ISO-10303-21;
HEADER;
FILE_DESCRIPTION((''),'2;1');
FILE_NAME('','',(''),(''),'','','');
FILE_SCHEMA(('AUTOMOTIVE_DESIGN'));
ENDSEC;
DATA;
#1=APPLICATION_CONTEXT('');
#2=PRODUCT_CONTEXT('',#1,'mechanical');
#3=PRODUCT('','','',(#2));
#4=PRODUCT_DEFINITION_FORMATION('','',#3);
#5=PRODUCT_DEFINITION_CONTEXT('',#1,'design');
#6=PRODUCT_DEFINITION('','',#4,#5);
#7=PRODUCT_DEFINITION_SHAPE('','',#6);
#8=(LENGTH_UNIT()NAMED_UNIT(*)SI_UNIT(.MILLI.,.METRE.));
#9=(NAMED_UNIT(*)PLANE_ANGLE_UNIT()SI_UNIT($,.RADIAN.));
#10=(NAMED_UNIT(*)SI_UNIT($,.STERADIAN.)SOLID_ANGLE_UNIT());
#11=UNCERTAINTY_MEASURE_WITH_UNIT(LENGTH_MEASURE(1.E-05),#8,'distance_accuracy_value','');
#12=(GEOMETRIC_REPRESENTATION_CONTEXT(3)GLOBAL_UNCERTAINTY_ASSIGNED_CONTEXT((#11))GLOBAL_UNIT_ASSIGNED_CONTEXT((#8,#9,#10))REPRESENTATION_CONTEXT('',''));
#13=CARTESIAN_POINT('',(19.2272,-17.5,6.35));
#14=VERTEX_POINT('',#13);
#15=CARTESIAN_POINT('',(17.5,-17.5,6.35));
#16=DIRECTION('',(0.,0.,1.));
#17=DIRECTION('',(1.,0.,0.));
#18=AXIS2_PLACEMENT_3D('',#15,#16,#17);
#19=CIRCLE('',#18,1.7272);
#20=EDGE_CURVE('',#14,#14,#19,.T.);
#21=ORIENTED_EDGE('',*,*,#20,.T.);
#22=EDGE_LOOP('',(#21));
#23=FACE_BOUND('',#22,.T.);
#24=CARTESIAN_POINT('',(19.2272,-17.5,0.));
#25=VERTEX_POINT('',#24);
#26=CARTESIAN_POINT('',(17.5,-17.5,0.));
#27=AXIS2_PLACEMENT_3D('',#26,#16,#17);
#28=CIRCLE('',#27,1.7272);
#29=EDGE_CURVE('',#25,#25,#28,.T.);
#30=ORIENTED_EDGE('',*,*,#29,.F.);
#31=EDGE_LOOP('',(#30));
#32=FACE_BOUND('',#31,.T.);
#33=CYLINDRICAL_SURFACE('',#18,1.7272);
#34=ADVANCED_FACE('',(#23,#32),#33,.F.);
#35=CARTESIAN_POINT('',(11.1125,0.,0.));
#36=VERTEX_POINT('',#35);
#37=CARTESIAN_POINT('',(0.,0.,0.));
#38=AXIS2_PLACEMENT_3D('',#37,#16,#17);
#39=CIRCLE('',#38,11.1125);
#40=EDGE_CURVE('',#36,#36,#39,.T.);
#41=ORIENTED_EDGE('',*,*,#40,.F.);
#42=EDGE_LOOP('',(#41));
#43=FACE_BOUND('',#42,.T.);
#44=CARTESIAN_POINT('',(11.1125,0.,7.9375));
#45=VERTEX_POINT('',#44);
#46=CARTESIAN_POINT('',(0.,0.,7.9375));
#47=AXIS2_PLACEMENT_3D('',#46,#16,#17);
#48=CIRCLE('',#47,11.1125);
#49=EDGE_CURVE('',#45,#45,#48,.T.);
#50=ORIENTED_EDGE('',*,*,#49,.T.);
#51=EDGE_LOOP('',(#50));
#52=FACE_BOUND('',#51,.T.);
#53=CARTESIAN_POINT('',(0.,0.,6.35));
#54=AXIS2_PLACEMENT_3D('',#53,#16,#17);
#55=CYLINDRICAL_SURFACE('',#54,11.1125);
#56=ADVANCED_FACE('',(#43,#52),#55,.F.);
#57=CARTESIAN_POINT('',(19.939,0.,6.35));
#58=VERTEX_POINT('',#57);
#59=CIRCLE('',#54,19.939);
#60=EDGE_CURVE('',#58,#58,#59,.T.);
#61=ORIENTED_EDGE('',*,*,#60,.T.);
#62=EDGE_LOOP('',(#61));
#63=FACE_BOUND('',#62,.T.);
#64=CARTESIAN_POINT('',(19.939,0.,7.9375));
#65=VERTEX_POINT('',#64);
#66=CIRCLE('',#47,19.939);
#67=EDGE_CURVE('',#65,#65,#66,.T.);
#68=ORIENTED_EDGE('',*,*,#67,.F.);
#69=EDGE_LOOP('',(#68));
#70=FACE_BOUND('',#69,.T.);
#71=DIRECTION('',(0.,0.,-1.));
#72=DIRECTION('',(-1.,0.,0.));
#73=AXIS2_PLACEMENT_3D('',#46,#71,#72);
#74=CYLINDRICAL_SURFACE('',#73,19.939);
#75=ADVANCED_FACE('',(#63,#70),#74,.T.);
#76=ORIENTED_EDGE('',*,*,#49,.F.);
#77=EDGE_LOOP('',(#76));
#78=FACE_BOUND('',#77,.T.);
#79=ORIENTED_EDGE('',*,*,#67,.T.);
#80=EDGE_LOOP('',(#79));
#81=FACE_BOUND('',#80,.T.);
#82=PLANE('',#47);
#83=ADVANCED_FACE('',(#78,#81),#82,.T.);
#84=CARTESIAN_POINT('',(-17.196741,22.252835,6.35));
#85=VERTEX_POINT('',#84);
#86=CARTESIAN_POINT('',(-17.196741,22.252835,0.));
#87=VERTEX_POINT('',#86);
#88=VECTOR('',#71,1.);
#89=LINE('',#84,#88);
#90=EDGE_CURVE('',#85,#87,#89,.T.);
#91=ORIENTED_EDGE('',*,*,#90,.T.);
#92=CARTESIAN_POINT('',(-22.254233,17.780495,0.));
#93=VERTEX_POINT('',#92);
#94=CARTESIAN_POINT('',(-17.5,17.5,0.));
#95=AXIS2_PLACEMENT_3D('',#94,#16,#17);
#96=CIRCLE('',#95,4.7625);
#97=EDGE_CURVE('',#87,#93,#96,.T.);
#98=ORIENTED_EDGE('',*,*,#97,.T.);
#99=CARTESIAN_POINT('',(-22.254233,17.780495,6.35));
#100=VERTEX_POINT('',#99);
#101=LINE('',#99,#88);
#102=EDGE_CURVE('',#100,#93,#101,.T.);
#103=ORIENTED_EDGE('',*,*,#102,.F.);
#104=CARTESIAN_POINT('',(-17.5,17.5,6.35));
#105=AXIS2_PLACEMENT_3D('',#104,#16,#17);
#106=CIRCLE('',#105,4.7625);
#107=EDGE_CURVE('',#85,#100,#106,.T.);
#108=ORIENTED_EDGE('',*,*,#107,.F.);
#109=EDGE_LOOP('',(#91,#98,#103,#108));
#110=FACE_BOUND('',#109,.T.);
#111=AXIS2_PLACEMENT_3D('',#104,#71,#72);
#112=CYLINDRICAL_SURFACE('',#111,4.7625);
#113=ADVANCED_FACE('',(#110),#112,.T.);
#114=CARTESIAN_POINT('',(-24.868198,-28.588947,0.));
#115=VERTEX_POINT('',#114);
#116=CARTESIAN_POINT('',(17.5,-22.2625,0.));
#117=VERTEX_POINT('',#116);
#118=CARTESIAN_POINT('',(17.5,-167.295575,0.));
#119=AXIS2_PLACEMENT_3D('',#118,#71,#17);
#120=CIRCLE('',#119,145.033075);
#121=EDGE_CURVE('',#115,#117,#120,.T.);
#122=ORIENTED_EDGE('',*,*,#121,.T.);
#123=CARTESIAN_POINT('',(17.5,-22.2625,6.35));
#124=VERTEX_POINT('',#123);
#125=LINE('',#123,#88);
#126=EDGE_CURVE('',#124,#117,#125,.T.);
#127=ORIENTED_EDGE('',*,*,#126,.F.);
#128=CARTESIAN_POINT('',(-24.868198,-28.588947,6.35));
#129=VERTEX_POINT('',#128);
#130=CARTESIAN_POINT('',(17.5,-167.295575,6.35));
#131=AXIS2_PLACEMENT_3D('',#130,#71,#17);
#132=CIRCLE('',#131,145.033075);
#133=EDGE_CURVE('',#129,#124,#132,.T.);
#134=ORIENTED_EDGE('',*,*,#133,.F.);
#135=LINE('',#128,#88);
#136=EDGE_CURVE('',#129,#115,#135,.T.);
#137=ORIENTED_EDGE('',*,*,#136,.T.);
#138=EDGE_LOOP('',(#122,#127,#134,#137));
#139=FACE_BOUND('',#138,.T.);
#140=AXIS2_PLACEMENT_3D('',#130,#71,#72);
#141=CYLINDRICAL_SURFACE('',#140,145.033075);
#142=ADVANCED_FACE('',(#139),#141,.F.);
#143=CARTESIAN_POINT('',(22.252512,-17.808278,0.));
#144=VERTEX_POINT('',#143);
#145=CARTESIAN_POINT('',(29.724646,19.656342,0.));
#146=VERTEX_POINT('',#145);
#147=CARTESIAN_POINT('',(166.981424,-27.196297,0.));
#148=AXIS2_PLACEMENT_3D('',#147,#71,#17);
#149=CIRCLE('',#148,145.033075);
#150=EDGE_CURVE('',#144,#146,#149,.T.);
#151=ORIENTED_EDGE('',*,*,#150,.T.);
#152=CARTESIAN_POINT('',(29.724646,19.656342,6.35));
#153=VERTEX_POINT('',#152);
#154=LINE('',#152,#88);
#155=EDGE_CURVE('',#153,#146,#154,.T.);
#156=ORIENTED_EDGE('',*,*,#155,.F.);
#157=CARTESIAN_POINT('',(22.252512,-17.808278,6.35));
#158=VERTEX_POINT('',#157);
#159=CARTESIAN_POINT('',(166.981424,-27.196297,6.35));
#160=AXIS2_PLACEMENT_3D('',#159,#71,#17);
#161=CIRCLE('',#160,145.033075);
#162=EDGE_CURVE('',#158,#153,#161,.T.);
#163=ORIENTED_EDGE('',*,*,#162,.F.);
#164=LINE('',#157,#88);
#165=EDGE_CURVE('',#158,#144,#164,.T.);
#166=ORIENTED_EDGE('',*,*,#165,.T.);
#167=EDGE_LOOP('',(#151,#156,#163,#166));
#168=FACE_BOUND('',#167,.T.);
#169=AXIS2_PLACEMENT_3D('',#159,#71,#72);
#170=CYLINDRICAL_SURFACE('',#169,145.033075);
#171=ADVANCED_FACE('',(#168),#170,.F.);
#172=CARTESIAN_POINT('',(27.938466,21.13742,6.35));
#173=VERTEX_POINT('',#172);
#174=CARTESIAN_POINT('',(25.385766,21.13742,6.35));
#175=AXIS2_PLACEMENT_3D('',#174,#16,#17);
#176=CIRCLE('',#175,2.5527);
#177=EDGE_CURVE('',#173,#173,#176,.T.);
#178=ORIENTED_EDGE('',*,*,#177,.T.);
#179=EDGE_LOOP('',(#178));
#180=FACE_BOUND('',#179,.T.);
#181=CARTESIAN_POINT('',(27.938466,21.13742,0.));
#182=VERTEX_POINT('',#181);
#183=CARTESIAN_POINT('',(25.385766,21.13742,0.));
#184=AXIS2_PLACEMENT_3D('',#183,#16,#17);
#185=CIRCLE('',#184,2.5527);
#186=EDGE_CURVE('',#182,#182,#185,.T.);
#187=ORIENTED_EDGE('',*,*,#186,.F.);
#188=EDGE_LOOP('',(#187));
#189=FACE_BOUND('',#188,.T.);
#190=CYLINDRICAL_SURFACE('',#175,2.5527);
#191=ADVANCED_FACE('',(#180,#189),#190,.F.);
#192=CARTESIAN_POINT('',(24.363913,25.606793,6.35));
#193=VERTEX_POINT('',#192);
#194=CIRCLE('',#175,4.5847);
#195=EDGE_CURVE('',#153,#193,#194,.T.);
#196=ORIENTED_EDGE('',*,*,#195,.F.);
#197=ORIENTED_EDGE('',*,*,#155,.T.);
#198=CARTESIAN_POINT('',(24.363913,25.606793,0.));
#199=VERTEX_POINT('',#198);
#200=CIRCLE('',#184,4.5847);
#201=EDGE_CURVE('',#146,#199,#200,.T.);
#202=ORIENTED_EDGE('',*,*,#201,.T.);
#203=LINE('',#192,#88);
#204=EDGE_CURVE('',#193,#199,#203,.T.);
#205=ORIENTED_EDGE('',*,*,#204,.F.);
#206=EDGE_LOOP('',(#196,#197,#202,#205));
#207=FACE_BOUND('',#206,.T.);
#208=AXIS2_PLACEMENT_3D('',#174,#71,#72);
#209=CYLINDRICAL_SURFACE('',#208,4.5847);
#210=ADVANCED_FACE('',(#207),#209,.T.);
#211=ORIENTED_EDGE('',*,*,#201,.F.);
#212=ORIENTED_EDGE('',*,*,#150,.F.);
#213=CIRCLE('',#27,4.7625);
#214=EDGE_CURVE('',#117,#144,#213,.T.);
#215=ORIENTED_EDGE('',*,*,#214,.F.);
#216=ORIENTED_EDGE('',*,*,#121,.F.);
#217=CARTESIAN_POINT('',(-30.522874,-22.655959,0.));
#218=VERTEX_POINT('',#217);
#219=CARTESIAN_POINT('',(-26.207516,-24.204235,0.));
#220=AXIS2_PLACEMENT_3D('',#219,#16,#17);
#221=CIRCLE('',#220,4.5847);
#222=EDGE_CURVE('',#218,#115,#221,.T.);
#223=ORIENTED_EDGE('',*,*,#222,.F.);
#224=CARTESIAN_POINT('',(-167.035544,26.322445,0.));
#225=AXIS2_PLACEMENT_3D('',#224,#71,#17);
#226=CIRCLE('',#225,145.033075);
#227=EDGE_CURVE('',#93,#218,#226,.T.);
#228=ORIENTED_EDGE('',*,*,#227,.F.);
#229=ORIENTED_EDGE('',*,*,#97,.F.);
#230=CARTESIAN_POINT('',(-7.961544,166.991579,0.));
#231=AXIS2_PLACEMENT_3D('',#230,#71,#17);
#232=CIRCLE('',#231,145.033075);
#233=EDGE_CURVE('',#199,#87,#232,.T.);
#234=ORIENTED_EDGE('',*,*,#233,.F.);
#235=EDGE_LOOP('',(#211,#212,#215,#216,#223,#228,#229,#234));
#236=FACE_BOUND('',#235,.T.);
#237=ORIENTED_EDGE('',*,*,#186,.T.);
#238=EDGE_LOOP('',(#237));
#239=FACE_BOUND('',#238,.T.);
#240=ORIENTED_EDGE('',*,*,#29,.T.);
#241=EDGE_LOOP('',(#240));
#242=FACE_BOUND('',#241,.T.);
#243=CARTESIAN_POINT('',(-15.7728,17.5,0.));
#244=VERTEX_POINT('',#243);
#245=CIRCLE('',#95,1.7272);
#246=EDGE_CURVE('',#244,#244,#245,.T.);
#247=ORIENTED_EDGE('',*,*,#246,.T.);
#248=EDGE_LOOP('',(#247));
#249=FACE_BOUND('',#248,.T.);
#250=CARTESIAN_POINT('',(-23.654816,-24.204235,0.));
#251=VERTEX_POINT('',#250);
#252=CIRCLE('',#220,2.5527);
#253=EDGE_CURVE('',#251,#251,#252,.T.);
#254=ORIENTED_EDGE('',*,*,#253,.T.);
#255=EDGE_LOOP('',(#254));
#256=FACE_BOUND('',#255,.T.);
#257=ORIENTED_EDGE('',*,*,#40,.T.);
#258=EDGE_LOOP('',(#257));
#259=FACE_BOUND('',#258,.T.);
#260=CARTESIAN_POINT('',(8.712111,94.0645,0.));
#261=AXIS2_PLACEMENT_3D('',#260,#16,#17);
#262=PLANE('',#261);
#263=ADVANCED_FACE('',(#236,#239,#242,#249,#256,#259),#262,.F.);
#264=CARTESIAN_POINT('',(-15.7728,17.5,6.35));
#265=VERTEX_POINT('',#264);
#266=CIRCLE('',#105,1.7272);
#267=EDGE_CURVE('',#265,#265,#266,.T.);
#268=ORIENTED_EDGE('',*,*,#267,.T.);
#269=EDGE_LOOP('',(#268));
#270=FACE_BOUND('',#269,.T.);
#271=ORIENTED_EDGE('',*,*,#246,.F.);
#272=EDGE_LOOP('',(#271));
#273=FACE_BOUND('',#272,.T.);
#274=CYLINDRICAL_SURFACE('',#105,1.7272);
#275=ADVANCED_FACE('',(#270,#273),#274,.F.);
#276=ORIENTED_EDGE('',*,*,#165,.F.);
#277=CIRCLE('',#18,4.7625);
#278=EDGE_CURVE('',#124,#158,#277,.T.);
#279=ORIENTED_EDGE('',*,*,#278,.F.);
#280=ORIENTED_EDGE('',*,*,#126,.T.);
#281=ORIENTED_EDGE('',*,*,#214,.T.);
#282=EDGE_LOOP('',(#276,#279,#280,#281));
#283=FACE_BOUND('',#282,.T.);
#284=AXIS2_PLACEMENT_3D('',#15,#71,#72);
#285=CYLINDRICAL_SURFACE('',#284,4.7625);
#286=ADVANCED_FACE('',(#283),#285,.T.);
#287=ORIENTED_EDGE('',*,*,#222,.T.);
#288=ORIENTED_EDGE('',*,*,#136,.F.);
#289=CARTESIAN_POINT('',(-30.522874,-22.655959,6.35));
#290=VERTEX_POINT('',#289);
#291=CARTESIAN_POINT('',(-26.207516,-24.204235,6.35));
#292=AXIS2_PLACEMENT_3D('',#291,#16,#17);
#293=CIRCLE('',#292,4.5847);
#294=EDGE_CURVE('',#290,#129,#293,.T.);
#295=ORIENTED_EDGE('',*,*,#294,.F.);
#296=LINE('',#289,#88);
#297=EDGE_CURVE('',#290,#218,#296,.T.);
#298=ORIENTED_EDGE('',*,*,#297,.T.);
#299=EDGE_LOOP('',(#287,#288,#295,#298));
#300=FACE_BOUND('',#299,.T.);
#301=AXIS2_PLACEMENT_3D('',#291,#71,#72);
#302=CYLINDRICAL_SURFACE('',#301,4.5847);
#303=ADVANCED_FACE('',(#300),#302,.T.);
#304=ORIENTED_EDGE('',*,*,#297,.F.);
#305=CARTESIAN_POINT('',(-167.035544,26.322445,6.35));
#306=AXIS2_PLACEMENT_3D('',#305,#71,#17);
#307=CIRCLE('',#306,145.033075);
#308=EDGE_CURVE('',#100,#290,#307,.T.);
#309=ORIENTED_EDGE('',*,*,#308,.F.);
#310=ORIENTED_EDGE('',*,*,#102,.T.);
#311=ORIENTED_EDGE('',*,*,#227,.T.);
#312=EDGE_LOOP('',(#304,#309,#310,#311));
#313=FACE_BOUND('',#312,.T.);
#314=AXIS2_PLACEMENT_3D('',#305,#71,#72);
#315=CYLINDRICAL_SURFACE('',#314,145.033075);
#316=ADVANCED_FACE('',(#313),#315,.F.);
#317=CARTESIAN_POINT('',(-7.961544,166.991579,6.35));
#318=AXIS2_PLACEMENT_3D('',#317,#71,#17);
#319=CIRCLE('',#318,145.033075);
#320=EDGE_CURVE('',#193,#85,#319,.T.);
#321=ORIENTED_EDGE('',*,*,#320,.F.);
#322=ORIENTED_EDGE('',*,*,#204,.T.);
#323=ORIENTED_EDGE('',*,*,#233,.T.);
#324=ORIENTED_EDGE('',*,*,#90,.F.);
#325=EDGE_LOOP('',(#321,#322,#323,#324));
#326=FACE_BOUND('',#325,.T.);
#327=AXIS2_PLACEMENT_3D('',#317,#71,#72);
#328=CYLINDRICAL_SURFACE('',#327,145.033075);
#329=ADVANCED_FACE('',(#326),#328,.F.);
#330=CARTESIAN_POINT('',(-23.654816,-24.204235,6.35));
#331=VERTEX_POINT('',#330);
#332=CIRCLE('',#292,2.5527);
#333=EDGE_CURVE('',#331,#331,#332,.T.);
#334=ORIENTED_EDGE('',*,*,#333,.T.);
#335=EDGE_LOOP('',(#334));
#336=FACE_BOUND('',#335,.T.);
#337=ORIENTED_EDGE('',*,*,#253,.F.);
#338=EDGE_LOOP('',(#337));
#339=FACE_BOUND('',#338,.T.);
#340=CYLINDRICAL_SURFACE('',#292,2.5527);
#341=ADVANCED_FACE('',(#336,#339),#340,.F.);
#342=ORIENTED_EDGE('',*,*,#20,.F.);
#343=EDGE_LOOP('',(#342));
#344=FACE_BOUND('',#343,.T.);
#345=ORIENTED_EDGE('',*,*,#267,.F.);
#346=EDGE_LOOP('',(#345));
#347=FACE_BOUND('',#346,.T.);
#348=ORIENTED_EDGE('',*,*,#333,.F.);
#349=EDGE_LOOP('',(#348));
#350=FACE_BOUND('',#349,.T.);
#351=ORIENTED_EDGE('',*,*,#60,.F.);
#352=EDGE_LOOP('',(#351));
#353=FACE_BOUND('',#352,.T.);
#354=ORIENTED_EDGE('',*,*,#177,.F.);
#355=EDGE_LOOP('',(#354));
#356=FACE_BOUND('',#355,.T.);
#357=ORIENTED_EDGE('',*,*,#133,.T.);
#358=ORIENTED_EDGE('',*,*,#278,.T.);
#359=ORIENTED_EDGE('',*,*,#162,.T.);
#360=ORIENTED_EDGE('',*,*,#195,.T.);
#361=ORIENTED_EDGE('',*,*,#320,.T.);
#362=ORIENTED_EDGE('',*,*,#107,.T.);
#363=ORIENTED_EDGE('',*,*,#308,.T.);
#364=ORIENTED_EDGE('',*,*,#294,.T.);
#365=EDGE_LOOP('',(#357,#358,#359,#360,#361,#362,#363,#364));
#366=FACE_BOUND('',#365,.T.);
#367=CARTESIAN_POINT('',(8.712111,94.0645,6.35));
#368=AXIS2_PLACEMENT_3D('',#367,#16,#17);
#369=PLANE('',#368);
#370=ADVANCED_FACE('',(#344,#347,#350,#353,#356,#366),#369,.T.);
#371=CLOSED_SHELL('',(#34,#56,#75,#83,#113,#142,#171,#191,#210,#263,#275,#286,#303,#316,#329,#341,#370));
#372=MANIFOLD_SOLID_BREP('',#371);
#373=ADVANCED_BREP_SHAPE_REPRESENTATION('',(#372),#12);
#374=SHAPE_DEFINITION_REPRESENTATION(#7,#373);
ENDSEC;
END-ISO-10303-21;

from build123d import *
from build123d.topology import SkipClean

# Parameters (mm, degrees)
BOSS_EXTRUDE1_DEPTH          = 6.35
F_7_8_0_875_DIAMETER_HOLE1_D = 22.225
F_10_CLEARANCE_HOLE1_D       = 5.1054
F_8_32_TAPPED_HOLE1_D        = 3.4544
SKETCH33_R                   = 19.939
SKETCH33_R_2                 = 11.1125
BOSS_EXTRUDE3_DEPTH          = 1.5875


with BuildPart() as part:
    # Sketch1 → Boss-Extrude1 (new body)
    with BuildSketch(Plane.XY):
        with BuildLine():
            ThreePointArc((29.724646249, 19.656342437), (28.792029634, 24.206107761), (24.36391271, 25.606792867))
            ThreePointArc((24.36391271, 25.606792867), (3.704744399, 22.428476482), (-17.196740725, 22.25283495))
            ThreePointArc((-17.196740725, 22.25283495), (-20.654876788, 21.06765451), (-22.254232731, 17.780494905))
            ThreePointArc((-22.254232731, 17.780494905), (-24.94278341, -2.733369886), (-30.522874393, -22.655958523))
            ThreePointArc((-30.522874393, -22.655958523), (-29.526294957, -27.367332021), (-24.868197962, -28.588947016))
            ThreePointArc((-24.868197962, -28.588947016), (-3.918964321, -23.852830981), (17.5, -22.2625))
            ThreePointArc((17.5, -22.2625), (20.756780188, -20.974879718), (22.252512093, -17.808277557))
            ThreePointArc((22.252512093, -17.808277557), (24.749635252, 1.17113371), (29.724646249, 19.656342437))
        make_face()
    extrude(amount=BOSS_EXTRUDE1_DEPTH)

    # 7/8 (0.875) Diameter Hole1 (through all)
    with Locations(Plane.XY.offset(6.35)):
        with Locations((0, 0)):
            Hole(F_7_8_0_875_DIAMETER_HOLE1_D / 2)

    # #10 Clearance Hole1 (through all)
    with Locations(Plane.XY.offset(6.35)):
        with Locations((25.385765971, 21.137420428), (-26.207516439, -24.204234926)):
            Hole(F_10_CLEARANCE_HOLE1_D / 2)

    # #8-32 Tapped Hole1 (through all)
    with Locations(Plane.XY.offset(6.35)):
        with Locations((17.5, -17.5), (-17.5, 17.5)):
            Hole(F_8_32_TAPPED_HOLE1_D / 2)

    # Sketch33 → Boss-Extrude3 (add)
    with SkipClean():  # the faces are left unmerged after this step: merging them gives an invalid solid
        with BuildSketch(Plane.XY.offset(6.35)):
            Circle(SKETCH33_R)
            Circle(SKETCH33_R_2, mode=Mode.SUBTRACT)
        extrude(amount=BOSS_EXTRUDE3_DEPTH)
    add(part.part.scale(1), mode=Mode.REPLACE)  # the faces are merged on a copy


solid = part.part
